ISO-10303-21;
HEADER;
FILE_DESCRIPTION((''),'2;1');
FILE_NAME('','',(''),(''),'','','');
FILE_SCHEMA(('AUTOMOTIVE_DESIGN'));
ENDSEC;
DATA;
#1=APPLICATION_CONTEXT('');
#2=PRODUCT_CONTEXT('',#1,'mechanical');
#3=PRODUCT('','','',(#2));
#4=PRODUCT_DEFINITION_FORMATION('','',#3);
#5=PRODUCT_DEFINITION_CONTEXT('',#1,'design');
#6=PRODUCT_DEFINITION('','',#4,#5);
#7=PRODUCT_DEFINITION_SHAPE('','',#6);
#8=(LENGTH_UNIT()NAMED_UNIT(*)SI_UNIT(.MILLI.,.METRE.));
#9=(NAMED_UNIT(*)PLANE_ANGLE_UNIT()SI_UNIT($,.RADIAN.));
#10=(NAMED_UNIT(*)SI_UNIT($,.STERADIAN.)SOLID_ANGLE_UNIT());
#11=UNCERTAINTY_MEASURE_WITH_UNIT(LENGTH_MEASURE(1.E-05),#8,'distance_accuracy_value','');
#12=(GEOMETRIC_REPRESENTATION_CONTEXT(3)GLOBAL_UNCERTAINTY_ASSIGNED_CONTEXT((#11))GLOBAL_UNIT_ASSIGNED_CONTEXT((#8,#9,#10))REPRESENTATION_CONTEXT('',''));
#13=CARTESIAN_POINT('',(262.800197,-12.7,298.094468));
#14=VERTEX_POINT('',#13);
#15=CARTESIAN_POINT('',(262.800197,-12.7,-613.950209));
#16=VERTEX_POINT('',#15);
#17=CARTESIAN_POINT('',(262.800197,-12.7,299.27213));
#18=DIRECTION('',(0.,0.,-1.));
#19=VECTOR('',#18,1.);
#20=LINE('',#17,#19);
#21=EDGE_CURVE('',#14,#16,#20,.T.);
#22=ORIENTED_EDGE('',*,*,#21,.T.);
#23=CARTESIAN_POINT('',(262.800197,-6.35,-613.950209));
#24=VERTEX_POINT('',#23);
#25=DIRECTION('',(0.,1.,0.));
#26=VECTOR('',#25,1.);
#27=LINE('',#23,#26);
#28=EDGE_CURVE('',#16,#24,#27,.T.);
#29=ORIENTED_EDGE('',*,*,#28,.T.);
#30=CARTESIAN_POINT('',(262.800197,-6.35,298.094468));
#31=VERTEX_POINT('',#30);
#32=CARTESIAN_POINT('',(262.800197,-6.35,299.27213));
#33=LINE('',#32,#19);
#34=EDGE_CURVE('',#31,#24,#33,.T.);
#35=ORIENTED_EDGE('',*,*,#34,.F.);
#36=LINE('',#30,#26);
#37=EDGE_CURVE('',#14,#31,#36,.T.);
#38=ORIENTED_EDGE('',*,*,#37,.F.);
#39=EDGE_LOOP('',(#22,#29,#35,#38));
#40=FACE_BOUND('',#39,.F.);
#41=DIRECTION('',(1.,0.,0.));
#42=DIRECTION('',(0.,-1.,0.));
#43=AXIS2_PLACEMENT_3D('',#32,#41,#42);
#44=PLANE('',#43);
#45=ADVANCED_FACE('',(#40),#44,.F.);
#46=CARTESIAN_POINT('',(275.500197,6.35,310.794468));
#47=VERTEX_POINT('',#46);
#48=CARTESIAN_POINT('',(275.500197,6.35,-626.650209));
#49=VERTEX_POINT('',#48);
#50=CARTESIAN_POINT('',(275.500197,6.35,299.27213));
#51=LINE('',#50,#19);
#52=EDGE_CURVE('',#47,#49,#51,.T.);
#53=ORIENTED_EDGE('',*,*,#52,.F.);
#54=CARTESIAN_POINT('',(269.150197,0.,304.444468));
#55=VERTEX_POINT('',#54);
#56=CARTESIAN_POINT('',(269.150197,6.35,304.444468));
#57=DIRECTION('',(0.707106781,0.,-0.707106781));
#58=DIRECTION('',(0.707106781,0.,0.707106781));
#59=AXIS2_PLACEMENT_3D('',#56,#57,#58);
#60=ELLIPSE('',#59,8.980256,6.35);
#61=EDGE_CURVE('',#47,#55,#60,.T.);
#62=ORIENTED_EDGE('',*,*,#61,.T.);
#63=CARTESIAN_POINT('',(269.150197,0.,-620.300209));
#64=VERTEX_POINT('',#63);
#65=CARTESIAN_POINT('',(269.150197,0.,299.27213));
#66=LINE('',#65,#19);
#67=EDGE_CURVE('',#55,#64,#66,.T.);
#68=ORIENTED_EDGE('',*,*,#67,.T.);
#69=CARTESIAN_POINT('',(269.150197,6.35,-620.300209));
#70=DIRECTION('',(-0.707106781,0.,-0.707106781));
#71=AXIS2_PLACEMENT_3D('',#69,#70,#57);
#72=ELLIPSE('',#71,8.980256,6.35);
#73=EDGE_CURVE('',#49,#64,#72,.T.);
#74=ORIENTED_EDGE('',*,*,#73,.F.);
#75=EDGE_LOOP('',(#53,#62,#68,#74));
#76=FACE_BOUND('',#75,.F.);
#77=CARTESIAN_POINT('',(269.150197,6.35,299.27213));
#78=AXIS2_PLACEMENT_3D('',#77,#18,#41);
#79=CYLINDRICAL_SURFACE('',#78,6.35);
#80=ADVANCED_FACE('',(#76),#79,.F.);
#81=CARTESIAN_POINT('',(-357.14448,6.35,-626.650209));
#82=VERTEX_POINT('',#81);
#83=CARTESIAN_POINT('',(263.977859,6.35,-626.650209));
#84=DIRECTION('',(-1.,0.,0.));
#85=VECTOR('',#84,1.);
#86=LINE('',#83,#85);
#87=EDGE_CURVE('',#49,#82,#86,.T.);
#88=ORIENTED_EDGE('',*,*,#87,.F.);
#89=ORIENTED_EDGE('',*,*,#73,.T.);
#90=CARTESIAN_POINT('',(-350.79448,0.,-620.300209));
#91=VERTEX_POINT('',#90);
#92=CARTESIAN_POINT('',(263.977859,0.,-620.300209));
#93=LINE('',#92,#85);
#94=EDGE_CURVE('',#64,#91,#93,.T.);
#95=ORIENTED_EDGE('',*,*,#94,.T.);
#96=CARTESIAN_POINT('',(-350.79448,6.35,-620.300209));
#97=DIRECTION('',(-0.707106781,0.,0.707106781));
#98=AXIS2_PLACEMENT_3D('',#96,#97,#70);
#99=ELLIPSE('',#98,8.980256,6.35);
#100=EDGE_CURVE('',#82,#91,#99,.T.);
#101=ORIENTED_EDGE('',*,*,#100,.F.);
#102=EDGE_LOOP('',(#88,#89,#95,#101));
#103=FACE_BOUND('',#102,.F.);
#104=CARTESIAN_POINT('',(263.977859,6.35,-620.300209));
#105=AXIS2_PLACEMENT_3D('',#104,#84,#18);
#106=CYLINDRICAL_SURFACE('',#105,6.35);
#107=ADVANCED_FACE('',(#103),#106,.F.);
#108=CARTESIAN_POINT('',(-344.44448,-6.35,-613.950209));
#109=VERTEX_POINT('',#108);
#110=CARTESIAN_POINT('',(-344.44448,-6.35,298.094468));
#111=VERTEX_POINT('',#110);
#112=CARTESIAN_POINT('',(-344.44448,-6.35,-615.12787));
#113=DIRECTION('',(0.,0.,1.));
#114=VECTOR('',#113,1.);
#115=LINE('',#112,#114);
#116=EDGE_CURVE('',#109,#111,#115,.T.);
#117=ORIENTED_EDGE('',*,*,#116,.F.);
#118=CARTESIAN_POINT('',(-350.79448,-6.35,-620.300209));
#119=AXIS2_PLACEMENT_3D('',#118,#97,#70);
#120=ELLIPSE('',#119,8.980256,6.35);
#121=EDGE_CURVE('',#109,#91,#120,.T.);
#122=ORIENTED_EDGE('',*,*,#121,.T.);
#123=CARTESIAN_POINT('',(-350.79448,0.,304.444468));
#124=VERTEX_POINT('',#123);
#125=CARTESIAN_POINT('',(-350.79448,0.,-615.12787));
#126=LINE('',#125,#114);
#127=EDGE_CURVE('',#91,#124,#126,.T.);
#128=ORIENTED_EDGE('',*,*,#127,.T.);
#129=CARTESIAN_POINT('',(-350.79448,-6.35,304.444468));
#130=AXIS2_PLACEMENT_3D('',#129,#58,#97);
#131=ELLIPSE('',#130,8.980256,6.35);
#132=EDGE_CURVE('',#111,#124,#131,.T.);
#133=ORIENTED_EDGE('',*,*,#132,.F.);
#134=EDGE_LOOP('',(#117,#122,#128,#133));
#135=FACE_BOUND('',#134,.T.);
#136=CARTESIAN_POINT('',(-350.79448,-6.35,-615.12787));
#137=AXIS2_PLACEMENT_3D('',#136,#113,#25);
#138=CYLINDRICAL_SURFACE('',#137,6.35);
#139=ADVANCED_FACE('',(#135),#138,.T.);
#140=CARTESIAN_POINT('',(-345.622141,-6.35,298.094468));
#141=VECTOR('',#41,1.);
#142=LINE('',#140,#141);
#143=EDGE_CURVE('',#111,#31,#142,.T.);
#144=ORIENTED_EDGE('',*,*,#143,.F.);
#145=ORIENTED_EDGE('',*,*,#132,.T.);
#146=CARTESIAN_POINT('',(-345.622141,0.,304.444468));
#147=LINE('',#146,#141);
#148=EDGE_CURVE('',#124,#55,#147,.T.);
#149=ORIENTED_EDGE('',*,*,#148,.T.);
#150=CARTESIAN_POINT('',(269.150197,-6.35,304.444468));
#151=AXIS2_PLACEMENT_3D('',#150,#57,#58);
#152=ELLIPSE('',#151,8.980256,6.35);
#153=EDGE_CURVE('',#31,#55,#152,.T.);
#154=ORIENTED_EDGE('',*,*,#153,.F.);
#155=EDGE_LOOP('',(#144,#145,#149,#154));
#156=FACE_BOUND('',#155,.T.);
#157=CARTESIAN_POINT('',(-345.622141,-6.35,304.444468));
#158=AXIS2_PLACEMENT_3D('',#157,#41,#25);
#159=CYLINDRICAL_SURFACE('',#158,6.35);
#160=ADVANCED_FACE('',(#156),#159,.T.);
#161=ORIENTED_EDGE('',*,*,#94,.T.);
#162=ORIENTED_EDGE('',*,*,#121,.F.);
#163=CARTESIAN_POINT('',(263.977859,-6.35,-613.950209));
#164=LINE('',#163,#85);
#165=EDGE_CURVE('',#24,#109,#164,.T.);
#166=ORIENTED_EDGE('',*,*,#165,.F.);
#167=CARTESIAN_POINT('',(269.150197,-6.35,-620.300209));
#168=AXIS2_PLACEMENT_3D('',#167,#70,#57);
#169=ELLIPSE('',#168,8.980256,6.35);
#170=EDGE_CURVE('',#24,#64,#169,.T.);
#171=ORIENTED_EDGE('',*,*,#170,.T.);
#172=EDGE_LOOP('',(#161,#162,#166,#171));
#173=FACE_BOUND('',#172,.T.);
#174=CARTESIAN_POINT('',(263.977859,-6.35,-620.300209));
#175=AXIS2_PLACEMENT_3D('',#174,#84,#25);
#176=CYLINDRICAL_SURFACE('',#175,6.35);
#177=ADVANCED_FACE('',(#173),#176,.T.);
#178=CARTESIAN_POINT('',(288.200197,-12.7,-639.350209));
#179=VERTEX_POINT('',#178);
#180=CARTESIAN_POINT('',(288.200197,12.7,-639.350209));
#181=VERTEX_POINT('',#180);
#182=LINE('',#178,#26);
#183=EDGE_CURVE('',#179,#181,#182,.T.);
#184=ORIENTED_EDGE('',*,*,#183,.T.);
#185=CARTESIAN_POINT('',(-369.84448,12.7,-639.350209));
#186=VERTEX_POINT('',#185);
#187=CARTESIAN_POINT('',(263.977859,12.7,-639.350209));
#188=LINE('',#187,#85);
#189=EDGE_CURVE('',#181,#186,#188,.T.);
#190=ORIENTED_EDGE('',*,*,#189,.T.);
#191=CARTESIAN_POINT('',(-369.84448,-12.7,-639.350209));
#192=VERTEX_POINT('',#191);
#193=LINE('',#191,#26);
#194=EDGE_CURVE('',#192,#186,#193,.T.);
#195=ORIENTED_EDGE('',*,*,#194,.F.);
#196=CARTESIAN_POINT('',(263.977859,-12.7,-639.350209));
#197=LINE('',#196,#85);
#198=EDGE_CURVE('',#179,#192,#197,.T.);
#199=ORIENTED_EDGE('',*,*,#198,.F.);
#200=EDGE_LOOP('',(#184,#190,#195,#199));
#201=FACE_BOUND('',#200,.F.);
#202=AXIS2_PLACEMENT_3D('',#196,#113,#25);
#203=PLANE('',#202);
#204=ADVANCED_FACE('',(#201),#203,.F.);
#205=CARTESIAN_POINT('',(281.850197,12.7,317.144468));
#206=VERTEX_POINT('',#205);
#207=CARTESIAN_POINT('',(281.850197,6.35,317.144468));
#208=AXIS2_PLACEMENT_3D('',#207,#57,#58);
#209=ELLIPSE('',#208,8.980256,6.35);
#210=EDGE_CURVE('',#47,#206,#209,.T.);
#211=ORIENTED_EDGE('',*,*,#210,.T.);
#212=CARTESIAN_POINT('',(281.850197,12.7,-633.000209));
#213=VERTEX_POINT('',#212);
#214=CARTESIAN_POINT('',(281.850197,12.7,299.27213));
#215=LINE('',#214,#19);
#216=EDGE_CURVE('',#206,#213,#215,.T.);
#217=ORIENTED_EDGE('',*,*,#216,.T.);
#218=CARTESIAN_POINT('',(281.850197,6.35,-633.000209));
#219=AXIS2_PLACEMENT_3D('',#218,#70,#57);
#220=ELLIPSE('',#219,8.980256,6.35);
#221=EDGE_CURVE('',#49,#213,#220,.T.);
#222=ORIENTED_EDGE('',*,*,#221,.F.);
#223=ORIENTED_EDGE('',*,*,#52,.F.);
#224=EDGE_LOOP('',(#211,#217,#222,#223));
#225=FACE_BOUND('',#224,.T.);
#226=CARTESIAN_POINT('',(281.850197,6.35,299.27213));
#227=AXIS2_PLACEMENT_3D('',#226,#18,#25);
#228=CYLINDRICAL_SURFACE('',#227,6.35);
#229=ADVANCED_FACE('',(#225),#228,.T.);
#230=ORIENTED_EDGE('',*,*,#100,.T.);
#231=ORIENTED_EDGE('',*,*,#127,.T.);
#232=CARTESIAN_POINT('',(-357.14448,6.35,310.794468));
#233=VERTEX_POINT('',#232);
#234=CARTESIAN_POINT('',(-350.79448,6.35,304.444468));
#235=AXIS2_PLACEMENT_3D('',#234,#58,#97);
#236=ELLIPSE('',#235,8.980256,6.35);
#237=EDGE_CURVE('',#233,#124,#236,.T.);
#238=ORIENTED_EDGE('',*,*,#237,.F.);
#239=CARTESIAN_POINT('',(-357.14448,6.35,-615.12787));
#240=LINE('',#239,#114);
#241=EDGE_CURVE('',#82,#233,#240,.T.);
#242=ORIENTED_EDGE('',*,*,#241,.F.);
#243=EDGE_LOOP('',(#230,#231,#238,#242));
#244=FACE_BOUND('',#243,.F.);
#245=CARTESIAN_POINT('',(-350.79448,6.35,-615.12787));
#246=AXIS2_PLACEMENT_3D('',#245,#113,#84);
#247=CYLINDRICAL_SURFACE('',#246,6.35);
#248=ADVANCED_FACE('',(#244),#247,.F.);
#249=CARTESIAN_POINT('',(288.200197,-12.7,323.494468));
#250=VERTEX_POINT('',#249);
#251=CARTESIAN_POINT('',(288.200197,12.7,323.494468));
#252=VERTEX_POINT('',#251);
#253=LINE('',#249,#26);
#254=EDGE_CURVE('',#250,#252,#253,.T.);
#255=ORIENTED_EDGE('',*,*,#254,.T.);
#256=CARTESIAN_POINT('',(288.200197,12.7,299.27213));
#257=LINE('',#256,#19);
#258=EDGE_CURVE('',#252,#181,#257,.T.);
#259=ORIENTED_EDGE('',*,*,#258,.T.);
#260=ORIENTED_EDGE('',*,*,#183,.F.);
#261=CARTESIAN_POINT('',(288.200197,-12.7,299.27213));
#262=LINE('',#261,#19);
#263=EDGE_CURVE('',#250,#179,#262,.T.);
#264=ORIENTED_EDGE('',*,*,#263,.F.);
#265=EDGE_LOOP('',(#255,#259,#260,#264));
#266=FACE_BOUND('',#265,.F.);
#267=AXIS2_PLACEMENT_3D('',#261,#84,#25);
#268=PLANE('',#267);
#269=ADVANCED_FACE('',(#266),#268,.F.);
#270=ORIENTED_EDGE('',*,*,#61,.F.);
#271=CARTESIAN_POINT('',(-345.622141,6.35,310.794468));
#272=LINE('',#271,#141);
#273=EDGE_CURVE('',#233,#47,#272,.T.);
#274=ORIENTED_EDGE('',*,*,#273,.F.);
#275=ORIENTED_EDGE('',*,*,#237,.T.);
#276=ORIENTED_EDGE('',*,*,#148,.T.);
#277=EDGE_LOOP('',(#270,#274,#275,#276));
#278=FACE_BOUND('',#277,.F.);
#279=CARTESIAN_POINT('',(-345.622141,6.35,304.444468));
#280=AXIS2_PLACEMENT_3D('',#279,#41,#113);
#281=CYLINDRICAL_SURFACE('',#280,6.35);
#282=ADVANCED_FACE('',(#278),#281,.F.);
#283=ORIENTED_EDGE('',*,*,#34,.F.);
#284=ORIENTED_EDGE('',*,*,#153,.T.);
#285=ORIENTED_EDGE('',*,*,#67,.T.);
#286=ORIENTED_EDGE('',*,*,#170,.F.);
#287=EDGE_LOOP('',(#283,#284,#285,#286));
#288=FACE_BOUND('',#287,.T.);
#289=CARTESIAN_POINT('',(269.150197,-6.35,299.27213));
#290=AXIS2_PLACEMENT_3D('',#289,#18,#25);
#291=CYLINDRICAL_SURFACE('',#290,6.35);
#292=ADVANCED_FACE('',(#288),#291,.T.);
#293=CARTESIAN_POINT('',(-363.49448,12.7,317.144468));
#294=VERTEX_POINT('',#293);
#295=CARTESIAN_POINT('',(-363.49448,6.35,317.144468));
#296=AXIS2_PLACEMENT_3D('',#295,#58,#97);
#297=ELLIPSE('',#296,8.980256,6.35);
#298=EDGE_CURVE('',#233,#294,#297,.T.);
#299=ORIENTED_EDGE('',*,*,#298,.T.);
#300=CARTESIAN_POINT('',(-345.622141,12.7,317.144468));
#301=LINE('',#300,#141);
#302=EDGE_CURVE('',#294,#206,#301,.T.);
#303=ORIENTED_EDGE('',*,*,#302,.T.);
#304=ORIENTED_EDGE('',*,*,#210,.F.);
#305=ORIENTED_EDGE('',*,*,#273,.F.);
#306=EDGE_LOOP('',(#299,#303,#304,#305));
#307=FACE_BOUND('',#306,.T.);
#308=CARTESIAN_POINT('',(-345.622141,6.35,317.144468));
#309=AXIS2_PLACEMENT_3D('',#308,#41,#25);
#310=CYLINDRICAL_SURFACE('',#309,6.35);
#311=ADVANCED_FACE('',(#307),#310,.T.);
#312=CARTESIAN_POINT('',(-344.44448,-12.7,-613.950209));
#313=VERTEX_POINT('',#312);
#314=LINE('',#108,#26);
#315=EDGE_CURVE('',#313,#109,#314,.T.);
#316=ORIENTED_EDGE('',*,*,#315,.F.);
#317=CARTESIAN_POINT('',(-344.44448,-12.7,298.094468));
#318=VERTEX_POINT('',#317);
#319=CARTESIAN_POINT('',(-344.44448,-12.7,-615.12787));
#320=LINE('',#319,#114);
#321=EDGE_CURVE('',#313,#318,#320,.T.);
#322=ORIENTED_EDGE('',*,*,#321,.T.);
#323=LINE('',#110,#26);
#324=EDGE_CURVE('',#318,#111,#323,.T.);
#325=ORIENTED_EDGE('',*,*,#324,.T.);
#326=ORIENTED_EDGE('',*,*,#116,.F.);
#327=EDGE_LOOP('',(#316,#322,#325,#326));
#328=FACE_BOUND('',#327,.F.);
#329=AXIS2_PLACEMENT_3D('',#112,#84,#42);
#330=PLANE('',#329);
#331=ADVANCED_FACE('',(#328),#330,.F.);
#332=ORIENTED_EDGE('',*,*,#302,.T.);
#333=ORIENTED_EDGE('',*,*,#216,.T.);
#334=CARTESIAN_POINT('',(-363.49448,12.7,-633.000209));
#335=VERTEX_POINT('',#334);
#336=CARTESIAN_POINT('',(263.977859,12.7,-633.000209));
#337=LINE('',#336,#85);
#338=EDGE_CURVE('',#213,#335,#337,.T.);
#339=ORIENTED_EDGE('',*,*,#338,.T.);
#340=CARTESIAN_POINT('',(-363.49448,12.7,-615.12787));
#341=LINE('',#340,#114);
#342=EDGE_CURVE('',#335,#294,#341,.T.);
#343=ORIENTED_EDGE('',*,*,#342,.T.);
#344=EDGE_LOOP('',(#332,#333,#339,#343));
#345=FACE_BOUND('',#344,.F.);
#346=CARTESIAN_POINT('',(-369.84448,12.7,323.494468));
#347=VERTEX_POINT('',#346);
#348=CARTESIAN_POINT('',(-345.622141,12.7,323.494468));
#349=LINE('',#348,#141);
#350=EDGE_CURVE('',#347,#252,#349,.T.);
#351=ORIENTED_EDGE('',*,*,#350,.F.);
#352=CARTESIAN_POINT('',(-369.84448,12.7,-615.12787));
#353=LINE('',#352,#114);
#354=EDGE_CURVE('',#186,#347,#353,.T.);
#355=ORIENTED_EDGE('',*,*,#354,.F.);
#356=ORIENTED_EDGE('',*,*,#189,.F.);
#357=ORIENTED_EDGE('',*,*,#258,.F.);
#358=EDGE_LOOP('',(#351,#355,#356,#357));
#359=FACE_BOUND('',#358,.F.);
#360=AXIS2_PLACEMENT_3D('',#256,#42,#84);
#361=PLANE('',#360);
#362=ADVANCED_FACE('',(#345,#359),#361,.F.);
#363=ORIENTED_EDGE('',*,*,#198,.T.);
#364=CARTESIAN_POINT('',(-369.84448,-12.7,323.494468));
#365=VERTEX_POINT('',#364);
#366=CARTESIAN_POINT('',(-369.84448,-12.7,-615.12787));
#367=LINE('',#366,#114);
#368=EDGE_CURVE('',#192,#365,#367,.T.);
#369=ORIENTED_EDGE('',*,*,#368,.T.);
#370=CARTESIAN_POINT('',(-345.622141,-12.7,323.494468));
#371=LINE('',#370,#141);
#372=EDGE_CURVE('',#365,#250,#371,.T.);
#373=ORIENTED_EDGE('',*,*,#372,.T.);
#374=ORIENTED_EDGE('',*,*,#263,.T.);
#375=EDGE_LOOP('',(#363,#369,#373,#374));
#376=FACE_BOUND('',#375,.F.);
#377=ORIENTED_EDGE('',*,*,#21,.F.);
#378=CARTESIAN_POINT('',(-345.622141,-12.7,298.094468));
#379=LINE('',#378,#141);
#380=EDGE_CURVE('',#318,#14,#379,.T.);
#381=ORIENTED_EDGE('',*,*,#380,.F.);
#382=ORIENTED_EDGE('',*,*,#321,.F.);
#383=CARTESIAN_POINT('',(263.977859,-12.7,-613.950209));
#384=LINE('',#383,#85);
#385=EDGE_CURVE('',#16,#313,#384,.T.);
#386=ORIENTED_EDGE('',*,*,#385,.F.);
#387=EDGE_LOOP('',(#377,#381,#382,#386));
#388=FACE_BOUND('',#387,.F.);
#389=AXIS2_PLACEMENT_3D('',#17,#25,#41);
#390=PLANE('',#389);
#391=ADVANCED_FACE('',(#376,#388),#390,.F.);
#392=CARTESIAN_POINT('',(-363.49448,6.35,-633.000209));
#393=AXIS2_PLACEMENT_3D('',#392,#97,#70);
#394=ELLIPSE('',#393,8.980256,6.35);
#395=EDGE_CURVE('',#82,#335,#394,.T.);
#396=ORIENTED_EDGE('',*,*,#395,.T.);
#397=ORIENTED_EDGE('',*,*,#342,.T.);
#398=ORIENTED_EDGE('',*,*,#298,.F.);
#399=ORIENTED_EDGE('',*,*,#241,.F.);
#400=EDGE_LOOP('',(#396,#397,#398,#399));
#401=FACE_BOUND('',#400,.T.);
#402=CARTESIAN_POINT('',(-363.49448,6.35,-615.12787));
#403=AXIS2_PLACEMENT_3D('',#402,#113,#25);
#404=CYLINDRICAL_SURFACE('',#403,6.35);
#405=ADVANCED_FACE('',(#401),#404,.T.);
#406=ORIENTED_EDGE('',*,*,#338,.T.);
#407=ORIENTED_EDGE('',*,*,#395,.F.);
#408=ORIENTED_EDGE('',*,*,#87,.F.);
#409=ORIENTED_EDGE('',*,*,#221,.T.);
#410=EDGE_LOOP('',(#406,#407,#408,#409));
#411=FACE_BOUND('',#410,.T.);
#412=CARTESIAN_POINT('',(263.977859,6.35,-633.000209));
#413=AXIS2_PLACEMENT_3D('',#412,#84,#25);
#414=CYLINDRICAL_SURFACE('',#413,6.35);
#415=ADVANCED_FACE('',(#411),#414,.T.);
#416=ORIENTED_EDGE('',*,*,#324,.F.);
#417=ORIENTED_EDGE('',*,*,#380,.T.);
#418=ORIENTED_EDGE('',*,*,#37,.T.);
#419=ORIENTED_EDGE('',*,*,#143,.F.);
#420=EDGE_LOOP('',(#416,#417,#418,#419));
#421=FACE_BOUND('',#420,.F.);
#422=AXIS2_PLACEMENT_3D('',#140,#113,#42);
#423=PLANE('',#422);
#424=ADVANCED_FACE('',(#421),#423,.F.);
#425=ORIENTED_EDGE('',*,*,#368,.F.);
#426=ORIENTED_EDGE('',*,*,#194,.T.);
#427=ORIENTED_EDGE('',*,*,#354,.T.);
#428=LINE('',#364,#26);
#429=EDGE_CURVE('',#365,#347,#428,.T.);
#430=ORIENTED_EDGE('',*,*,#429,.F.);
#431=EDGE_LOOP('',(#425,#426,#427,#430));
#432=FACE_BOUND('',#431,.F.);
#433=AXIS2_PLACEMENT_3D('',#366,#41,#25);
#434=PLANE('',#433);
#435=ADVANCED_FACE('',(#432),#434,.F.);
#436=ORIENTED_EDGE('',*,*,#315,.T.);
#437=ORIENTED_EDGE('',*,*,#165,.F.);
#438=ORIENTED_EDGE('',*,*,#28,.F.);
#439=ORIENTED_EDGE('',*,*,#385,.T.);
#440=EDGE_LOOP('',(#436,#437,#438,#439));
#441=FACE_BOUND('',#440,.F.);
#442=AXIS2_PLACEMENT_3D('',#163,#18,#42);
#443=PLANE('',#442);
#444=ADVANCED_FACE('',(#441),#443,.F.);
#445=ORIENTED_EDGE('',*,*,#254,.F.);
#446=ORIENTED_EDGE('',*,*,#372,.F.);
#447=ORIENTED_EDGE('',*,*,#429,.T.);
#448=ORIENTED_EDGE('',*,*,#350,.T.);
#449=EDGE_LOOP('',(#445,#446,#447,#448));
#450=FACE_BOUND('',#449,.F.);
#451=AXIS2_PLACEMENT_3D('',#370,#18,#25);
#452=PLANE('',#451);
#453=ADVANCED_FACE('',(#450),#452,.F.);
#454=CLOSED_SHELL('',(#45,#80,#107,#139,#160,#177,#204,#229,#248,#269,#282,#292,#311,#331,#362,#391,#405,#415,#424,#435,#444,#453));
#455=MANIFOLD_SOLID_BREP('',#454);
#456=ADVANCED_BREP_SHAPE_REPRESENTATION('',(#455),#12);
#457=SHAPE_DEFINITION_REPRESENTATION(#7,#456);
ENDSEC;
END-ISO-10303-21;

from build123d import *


with BuildPart() as f2:
    # F2: sweep along a path in F0
    with BuildLine(Plane.XZ) as f2_path:
        Line((263.9778585136, 299.2721299103), (263.9778585136, -615.1278700897))
        Line((263.9778585136, -615.1278700897), (-345.6221414864, -615.1278700897))
        Line((-345.6221414864, -615.1278700897), (-345.6221414864, 299.2721299103))
        Line((-345.6221414864, 299.2721299103), (263.9778585136, 299.2721299103))
    # F1 (on Top) → F2 (sweep)
    with BuildSketch(Plane.XY):
        with BuildLine():
            Line((288.2001969657, -12.7), (288.2001969657, 12.7))
            Line((288.2001969657, 12.7), (281.8501969657, 12.7))
            ThreePointArc((281.8501969657, 12.7), (277.3600689052, 10.8401280605), (275.5001969657, 6.35))
            ThreePointArc((275.5001969657, 6.35), (273.6403250262, 1.8598719395), (269.1501969657, 0))
            ThreePointArc((269.1501969657, 0), (264.6600689052, -1.8598719395), (262.8001969657, -6.35))
            Line((262.8001969657, -6.35), (262.8001969657, -12.7))
            Line((262.8001969657, -12.7), (288.2001969657, -12.7))
        make_face()
    sweep(path=f2_path.line, transition=Transition.RIGHT)


solid = f2.part
